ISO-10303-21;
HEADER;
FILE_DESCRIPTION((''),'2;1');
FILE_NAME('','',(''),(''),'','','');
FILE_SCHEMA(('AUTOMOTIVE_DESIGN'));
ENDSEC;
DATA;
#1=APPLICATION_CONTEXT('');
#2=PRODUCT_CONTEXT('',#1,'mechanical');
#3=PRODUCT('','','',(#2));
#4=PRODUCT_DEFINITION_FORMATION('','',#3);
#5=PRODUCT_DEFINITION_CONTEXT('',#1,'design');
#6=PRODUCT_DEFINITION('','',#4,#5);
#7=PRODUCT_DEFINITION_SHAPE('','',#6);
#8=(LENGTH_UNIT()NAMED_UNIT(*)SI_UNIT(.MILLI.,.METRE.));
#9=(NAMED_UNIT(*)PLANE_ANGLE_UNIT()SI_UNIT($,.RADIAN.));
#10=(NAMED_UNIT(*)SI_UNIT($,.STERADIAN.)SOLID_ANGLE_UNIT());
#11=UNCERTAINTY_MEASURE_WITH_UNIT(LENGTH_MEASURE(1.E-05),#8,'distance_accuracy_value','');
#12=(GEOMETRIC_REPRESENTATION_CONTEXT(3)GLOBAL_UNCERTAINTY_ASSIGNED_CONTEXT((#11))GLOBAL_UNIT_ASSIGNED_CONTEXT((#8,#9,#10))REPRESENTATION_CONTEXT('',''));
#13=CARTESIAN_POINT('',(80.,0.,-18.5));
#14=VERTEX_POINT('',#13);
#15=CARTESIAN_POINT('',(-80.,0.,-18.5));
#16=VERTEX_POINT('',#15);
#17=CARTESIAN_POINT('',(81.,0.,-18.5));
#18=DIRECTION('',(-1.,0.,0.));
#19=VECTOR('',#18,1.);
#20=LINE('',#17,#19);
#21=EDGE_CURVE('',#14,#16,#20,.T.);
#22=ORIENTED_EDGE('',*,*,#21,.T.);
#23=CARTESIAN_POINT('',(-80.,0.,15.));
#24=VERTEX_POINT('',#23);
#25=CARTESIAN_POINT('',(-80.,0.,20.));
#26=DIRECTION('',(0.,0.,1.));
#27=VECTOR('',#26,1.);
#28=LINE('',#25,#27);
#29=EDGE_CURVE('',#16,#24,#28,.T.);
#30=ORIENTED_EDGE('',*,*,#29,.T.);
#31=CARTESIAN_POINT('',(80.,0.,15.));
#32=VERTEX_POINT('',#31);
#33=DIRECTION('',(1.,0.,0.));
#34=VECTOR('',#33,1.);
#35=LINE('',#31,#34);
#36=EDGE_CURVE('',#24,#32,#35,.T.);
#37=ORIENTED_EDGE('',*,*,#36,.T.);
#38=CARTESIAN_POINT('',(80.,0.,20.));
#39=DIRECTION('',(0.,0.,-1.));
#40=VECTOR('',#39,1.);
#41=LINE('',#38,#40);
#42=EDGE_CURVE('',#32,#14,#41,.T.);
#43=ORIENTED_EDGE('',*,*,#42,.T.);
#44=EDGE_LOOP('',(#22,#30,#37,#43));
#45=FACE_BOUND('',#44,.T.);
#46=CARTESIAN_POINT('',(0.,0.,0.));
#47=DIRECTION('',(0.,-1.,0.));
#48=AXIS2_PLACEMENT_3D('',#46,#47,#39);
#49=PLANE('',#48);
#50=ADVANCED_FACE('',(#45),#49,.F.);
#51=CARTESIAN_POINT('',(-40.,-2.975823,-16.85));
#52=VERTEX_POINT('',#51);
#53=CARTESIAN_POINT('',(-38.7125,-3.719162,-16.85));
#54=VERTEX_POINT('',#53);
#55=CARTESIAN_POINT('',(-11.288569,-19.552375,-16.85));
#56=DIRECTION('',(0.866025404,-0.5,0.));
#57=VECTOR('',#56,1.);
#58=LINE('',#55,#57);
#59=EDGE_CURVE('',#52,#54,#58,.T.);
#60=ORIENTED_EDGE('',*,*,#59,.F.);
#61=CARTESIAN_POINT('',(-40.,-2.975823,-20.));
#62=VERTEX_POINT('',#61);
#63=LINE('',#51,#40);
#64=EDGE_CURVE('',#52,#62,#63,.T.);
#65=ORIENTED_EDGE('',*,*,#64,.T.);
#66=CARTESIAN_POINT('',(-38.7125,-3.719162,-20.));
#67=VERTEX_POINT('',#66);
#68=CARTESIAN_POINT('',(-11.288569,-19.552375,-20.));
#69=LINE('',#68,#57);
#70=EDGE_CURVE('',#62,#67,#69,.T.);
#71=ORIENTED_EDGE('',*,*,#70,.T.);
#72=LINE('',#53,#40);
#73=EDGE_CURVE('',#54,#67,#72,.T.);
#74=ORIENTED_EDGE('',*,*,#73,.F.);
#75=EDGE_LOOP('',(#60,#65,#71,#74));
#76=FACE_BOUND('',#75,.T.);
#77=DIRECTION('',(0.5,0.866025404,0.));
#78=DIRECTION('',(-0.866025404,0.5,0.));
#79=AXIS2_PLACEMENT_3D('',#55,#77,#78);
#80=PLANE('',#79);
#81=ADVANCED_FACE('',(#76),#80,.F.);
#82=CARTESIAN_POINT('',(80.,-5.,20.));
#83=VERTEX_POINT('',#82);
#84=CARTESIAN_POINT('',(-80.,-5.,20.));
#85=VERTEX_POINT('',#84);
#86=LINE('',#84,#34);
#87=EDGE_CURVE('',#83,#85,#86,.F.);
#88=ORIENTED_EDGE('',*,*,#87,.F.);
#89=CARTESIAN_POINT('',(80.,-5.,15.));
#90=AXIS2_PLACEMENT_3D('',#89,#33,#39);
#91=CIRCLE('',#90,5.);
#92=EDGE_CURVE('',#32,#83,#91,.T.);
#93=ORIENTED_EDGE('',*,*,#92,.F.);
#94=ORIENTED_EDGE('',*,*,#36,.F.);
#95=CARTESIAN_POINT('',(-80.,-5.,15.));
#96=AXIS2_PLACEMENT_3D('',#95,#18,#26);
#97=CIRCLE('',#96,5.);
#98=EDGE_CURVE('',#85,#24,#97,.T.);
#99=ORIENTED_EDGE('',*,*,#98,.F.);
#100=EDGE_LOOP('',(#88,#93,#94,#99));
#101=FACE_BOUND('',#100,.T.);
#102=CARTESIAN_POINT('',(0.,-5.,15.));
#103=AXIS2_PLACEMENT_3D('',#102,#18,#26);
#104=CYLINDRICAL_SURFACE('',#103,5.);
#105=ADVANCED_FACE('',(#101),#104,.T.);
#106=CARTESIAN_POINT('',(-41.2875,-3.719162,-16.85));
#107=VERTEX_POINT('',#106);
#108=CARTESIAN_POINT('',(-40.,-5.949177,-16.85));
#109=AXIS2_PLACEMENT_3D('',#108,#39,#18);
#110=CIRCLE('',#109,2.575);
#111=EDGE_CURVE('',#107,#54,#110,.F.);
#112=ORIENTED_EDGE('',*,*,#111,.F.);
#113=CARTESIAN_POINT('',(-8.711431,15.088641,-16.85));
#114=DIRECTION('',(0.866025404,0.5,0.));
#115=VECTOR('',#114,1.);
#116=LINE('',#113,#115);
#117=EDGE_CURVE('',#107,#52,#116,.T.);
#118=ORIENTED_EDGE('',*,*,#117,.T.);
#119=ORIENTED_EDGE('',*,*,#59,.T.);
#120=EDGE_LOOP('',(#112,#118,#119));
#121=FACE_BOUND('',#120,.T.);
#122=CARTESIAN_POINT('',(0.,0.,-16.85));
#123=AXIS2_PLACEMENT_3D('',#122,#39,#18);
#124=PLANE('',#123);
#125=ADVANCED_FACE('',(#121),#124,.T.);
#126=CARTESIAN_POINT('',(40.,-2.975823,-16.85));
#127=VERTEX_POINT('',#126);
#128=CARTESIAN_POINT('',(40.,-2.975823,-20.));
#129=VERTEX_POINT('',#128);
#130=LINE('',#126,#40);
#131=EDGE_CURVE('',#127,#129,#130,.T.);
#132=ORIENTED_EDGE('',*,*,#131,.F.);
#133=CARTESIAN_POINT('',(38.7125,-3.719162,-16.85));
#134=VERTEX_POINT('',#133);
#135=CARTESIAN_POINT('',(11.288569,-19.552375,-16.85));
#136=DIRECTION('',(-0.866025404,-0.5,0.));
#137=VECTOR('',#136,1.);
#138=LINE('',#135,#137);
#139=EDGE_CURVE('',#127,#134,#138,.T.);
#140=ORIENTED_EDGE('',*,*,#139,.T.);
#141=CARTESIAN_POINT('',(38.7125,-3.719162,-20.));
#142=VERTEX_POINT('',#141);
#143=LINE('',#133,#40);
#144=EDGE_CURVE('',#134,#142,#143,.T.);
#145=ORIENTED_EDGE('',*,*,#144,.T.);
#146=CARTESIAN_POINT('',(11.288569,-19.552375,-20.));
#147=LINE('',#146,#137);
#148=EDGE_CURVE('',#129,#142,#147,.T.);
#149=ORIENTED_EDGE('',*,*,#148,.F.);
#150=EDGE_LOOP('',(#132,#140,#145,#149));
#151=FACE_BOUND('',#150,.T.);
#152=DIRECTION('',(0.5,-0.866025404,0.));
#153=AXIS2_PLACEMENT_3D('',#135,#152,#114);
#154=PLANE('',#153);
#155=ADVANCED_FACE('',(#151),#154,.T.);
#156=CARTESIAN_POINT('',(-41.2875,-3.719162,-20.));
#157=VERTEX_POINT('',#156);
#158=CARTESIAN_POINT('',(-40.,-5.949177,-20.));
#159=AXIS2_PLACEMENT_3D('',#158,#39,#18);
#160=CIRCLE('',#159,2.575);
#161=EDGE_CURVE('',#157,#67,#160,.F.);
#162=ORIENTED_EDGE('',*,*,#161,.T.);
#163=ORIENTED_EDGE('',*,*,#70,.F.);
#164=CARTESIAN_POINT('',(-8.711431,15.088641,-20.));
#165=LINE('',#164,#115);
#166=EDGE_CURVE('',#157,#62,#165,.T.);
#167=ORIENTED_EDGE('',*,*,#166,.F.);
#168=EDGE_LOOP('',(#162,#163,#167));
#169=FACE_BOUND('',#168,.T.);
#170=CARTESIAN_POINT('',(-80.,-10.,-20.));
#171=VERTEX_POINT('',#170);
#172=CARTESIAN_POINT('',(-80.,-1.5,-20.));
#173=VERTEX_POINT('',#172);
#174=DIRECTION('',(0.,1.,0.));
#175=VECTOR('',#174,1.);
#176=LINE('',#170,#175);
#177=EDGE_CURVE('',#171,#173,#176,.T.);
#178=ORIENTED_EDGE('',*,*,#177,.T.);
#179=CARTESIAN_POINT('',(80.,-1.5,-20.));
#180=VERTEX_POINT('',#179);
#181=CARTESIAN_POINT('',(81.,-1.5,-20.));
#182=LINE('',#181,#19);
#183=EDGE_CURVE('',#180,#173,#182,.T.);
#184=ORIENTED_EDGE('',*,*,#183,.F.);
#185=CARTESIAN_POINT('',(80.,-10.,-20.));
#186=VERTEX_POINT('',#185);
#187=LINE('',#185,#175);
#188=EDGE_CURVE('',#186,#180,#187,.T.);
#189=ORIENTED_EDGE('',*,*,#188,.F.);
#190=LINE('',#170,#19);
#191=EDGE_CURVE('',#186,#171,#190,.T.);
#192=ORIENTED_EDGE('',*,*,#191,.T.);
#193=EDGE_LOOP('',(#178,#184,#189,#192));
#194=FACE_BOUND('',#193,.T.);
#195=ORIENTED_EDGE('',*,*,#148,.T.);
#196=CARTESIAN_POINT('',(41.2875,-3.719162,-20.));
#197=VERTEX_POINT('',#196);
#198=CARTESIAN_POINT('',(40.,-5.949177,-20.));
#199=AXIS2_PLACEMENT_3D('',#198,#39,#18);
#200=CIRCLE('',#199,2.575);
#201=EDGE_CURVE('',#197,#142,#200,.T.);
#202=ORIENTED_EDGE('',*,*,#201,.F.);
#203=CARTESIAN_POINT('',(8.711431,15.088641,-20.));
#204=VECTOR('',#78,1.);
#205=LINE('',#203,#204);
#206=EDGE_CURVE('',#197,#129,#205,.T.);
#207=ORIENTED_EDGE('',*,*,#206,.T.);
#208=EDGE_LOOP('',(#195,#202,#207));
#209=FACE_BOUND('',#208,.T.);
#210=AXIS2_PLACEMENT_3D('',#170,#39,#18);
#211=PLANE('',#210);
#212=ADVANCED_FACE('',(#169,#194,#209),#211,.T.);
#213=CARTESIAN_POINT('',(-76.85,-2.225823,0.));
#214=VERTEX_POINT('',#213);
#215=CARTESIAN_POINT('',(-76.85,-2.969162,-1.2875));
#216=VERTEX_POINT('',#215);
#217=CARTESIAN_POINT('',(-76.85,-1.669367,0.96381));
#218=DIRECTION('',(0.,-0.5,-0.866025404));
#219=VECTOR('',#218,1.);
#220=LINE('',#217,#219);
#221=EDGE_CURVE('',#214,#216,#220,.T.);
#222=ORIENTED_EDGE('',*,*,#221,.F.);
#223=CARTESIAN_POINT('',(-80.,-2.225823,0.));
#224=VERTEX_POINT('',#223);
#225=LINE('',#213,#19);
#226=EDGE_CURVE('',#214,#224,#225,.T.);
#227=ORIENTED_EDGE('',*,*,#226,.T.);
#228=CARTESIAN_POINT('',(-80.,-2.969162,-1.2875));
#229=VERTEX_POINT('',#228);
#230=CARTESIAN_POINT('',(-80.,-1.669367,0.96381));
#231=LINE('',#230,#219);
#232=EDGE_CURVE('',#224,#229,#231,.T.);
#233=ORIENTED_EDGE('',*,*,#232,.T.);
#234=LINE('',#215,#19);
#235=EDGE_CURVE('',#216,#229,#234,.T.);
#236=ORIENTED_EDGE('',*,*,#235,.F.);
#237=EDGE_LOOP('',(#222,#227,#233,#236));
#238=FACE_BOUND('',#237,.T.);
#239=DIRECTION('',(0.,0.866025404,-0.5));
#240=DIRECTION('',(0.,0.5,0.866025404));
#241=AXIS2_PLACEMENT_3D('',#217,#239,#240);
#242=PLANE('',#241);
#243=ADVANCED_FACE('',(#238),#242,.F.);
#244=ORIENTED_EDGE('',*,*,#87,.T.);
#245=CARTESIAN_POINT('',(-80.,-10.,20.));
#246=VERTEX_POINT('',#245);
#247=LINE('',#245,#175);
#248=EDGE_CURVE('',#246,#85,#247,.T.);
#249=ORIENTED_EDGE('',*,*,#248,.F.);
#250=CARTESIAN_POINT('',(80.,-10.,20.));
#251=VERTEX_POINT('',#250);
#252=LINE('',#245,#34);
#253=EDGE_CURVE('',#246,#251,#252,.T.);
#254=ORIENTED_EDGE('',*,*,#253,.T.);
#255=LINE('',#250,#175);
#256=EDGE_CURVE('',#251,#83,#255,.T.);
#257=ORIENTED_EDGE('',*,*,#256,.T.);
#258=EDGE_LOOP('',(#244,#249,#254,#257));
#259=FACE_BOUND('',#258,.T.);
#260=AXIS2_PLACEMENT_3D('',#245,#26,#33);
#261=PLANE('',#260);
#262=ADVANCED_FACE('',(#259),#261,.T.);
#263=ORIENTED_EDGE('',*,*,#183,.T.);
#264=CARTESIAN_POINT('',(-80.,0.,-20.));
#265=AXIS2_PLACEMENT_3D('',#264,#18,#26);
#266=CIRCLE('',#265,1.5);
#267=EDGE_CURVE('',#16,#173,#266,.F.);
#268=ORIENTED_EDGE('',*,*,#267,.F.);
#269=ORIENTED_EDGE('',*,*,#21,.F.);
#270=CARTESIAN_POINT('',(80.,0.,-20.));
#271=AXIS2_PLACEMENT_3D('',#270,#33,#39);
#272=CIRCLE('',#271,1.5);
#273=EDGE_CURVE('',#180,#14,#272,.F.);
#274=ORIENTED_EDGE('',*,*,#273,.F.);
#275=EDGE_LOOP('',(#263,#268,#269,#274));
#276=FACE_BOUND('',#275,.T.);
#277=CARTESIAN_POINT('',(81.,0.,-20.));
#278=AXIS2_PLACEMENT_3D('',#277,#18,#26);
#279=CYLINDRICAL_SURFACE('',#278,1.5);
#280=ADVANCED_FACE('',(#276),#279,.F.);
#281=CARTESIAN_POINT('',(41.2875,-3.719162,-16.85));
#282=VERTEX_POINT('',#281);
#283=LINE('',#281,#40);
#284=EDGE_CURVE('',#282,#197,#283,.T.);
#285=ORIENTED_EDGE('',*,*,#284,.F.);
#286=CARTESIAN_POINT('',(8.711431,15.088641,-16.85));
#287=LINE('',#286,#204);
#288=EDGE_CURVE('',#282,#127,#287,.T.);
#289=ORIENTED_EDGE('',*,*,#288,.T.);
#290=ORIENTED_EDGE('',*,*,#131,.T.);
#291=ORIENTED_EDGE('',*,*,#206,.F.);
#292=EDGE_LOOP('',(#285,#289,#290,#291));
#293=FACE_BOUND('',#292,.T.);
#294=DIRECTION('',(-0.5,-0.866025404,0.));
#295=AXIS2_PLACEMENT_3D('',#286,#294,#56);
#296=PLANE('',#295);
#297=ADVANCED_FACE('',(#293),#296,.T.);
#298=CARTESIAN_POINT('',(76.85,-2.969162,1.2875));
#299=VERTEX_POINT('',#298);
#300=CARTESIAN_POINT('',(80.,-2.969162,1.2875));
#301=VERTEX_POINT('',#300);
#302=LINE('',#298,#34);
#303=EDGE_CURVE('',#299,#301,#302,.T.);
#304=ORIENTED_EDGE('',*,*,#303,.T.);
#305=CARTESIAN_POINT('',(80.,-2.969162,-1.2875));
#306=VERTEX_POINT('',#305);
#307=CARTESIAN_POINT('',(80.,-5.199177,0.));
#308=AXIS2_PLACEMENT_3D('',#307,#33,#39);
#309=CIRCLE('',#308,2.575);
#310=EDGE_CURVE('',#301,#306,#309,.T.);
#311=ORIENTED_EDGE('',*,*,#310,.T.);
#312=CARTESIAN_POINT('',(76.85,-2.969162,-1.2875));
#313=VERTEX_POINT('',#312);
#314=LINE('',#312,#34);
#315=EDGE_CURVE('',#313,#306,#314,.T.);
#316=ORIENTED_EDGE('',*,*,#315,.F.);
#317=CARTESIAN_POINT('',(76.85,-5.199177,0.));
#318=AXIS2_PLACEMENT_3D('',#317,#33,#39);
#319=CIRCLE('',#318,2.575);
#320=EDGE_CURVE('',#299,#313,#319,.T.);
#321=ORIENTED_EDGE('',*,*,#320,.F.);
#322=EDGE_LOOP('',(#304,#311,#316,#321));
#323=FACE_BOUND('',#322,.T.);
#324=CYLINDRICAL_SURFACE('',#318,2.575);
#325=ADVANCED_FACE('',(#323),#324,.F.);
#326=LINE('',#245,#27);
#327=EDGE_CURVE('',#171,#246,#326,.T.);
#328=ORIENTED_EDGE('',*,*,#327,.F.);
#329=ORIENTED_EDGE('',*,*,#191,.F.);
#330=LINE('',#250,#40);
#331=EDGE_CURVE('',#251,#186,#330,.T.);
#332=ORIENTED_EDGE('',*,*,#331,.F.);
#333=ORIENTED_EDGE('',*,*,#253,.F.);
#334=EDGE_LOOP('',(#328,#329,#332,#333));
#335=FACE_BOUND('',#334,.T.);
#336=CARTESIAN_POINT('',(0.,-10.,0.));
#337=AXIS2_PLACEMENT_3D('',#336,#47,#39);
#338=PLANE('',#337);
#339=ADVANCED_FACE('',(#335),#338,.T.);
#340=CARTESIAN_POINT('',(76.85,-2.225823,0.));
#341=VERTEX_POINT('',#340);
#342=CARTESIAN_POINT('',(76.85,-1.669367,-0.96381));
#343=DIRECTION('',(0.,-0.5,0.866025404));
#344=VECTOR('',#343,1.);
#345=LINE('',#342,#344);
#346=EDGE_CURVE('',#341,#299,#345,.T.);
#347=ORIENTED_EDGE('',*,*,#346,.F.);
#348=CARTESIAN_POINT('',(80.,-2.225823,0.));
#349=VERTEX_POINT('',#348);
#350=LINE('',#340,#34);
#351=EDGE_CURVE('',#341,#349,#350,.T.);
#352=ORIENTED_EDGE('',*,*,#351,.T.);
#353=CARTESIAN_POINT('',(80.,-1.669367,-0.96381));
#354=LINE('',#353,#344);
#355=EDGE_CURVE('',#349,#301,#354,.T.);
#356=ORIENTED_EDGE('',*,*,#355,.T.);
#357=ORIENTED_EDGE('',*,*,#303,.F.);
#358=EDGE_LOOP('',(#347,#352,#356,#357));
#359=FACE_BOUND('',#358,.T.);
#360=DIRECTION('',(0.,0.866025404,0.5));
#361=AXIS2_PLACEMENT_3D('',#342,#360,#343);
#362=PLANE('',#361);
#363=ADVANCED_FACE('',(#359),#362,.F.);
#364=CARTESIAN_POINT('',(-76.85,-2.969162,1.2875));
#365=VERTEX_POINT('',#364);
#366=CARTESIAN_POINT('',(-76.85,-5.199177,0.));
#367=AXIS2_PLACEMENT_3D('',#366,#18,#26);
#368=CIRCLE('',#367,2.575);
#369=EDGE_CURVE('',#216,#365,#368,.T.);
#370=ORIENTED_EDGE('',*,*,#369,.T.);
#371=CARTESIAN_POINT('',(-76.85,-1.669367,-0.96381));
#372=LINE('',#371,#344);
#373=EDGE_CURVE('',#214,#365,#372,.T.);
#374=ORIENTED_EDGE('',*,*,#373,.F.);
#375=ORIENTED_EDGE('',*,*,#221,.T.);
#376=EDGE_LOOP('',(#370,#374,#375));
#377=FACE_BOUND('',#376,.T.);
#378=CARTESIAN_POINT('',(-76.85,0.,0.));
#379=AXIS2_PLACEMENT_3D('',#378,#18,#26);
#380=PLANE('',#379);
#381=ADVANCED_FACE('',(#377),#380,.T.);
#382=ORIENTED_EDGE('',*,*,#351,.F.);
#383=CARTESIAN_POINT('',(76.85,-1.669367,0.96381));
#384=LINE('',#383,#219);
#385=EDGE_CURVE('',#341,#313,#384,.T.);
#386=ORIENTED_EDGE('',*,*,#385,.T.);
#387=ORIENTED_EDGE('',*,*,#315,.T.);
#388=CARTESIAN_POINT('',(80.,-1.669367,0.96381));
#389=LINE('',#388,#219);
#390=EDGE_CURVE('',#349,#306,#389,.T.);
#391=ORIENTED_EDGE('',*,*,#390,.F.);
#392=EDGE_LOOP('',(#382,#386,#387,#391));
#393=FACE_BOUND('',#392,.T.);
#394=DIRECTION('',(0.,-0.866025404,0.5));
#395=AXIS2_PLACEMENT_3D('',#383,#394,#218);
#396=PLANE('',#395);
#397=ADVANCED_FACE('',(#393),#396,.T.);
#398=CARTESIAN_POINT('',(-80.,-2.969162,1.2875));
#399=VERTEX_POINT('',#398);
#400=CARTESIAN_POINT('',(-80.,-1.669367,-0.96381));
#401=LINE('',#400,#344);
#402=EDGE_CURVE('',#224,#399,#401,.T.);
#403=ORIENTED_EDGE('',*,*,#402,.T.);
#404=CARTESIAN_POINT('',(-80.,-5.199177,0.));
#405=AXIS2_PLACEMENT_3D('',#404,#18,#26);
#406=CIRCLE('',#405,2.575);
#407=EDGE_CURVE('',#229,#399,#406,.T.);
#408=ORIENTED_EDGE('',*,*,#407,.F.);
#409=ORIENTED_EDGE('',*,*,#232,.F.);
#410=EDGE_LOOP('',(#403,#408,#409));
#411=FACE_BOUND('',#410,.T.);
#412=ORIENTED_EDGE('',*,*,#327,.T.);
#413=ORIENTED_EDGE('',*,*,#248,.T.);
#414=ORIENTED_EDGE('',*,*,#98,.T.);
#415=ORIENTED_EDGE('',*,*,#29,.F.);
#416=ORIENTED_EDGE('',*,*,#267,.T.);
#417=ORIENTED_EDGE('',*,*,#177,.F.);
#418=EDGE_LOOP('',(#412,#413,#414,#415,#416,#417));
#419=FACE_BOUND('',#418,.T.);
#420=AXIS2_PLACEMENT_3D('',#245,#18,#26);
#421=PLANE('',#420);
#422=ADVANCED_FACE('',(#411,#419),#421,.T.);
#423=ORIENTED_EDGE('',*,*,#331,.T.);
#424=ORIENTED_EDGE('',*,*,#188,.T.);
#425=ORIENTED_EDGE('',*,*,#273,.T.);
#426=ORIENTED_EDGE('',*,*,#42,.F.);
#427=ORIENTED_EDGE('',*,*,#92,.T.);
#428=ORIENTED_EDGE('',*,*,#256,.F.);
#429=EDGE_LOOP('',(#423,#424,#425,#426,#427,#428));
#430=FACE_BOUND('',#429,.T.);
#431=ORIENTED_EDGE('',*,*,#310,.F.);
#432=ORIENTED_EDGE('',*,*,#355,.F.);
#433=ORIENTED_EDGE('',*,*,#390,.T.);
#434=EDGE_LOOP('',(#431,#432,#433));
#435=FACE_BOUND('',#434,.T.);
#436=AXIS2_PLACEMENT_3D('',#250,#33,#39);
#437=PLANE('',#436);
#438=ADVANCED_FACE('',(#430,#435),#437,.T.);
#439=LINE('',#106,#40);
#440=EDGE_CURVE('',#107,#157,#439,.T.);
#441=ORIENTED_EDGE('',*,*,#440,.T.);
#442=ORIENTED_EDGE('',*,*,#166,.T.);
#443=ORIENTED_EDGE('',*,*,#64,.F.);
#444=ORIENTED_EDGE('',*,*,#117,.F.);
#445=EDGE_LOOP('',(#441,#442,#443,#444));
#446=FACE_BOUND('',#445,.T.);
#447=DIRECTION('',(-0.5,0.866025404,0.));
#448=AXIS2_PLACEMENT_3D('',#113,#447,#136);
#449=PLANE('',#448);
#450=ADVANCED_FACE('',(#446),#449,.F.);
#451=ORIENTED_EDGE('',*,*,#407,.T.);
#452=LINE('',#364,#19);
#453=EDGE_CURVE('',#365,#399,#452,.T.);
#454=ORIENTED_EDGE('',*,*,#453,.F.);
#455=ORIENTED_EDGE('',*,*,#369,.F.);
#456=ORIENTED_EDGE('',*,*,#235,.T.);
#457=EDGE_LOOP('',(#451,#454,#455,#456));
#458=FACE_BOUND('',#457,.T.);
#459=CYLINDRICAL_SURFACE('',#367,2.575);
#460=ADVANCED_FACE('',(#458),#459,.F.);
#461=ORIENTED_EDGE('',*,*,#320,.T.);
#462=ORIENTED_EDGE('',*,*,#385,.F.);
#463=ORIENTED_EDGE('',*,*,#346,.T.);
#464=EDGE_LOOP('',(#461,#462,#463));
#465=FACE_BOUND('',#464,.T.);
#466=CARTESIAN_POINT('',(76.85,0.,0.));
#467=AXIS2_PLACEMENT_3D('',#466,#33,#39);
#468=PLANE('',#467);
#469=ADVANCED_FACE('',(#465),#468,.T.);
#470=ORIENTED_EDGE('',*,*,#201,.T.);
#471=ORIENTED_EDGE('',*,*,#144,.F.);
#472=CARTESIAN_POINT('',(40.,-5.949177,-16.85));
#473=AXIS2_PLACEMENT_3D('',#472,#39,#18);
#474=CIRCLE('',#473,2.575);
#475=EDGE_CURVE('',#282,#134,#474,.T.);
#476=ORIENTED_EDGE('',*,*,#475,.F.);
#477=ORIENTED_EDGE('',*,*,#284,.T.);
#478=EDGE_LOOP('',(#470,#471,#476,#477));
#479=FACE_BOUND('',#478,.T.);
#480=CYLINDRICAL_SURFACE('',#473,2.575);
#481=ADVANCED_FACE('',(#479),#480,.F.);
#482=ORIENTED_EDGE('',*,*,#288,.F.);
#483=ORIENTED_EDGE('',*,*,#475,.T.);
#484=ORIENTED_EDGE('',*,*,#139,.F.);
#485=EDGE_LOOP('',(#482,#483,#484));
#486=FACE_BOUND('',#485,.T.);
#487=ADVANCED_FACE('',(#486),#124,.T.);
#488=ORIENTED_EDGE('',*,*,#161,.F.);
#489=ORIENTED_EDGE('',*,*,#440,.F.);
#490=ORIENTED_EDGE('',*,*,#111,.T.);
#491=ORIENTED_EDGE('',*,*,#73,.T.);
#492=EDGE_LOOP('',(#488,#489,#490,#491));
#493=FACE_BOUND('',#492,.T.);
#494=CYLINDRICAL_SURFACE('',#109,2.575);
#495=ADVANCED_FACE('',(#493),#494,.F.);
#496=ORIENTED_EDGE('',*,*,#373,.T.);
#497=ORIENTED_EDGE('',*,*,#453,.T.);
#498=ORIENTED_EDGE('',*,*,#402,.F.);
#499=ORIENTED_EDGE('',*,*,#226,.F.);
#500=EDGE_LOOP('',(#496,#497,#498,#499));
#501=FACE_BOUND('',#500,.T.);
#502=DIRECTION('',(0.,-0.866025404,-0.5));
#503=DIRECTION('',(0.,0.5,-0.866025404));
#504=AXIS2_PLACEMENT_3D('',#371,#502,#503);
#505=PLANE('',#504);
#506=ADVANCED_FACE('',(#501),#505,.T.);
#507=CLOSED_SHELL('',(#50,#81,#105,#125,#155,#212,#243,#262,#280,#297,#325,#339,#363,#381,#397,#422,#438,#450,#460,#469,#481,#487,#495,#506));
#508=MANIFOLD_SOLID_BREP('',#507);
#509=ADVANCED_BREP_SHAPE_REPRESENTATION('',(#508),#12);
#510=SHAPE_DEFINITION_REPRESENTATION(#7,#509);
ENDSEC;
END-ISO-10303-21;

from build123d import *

# Parameters (mm, degrees)
SKETCH_1_W               = 160
SKETCH_1_H               = 40
EXTRUDE_1_DEPTH          = 10
SWEEP_START              = -80
SWEEP_1_DEPTH            = 160
SKETCH_6_R               = 2.575
CUT_EXTRUDE_1_DEPTH      = 3.15
FILLET_1_R               = 5
SKETCH_7_R               = 2.575
CUT_EXTRUDE_2_DEPTH      = 3.15
PATTERN_CIRCULAR_1_COUNT = 2


# Read off the part's stored shape, not the designer's step: Вырез-По траектории1
with BuildPart() as part:
    # Эскиз1 → Бобышка-Вытянуть1 (new body)
    with BuildSketch(Plane(origin=(0, 0, 0), x_dir=(1, 0, 0), z_dir=(0, 1, 0))):
        Rectangle(SKETCH_1_W, SKETCH_1_H)
    extrude(amount=-EXTRUDE_1_DEPTH)

    # Вырез-По траектории1 outline → Вырез-По траектории1 (cut)
    with BuildSketch(Plane.YZ.offset(SWEEP_START)):
        with BuildLine():
            ThreePointArc((0, -18.5), (-1.060660172, -18.939339828), (-1.5, -20))
            Line((-1.5, -20), (0, -20))
            Line((0, -20), (0, -18.5))
        make_face()
    extrude(amount=SWEEP_1_DEPTH, mode=Mode.SUBTRACT)

    # Эскиз6 → Вырез-Вытянуть1 (cut)
    with BuildSketch(Plane(origin=(0, 0, -20), x_dir=(-1, 0, 0), z_dir=(0, 0, -1))):
        with Locations((-40, -5.949176943)):
            Circle(SKETCH_6_R)
        with BuildLine():
            Line((-40, -2.975823057), (-41.2875, -3.719161528))
            ThreePointArc((-41.2875, -3.719161528), (-40, -3.374176943), (-38.7125, -3.719161528))
            Line((-38.7125, -3.719161528), (-40, -2.975823057))
        make_face()
        with Locations((40, -5.949176943)):
            Circle(SKETCH_6_R)
        with BuildLine():
            ThreePointArc((38.7125, -3.719161528), (40, -3.374176943), (41.2875, -3.719161528))
            Line((41.2875, -3.719161528), (40, -2.975823057))
            Line((40, -2.975823057), (38.7125, -3.719161528))
        make_face()
    extrude(amount=-CUT_EXTRUDE_1_DEPTH, mode=Mode.SUBTRACT)

    # Скругление1
    fillet_1_edges = [part.edges().sort_by_distance(p)[0] for p in [
        (0, 0, 20),
    ]]
    fillet(fillet_1_edges, radius=FILLET_1_R)

    # Эскиз7 → Вырез-Вытянуть2 (cut)
    with BuildSketch(Plane.ZY.offset(80)):
        with Locations((0, -5.199176943)):
            Circle(SKETCH_7_R)
        with BuildLine():
            Line((1.2875, -2.969161528), (0, -2.225823057))
            Line((0, -2.225823057), (-1.2875, -2.969161528))
            ThreePointArc((-1.2875, -2.969161528), (0, -2.624176943), (1.2875, -2.969161528))
        make_face()
    cut_extrude_2 = extrude(amount=-CUT_EXTRUDE_2_DEPTH, mode=Mode.SUBTRACT)

    # Круговой массив1: Вырез-Вытянуть2 ×2 about axis
    pattern_circular_1_axis = Axis((0, 0, 0), (0, 1, 0))
    for i in range(1, PATTERN_CIRCULAR_1_COUNT):
        add(cut_extrude_2.rotate(pattern_circular_1_axis, i * 360 / PATTERN_CIRCULAR_1_COUNT), mode=Mode.SUBTRACT)


solid = part.part
